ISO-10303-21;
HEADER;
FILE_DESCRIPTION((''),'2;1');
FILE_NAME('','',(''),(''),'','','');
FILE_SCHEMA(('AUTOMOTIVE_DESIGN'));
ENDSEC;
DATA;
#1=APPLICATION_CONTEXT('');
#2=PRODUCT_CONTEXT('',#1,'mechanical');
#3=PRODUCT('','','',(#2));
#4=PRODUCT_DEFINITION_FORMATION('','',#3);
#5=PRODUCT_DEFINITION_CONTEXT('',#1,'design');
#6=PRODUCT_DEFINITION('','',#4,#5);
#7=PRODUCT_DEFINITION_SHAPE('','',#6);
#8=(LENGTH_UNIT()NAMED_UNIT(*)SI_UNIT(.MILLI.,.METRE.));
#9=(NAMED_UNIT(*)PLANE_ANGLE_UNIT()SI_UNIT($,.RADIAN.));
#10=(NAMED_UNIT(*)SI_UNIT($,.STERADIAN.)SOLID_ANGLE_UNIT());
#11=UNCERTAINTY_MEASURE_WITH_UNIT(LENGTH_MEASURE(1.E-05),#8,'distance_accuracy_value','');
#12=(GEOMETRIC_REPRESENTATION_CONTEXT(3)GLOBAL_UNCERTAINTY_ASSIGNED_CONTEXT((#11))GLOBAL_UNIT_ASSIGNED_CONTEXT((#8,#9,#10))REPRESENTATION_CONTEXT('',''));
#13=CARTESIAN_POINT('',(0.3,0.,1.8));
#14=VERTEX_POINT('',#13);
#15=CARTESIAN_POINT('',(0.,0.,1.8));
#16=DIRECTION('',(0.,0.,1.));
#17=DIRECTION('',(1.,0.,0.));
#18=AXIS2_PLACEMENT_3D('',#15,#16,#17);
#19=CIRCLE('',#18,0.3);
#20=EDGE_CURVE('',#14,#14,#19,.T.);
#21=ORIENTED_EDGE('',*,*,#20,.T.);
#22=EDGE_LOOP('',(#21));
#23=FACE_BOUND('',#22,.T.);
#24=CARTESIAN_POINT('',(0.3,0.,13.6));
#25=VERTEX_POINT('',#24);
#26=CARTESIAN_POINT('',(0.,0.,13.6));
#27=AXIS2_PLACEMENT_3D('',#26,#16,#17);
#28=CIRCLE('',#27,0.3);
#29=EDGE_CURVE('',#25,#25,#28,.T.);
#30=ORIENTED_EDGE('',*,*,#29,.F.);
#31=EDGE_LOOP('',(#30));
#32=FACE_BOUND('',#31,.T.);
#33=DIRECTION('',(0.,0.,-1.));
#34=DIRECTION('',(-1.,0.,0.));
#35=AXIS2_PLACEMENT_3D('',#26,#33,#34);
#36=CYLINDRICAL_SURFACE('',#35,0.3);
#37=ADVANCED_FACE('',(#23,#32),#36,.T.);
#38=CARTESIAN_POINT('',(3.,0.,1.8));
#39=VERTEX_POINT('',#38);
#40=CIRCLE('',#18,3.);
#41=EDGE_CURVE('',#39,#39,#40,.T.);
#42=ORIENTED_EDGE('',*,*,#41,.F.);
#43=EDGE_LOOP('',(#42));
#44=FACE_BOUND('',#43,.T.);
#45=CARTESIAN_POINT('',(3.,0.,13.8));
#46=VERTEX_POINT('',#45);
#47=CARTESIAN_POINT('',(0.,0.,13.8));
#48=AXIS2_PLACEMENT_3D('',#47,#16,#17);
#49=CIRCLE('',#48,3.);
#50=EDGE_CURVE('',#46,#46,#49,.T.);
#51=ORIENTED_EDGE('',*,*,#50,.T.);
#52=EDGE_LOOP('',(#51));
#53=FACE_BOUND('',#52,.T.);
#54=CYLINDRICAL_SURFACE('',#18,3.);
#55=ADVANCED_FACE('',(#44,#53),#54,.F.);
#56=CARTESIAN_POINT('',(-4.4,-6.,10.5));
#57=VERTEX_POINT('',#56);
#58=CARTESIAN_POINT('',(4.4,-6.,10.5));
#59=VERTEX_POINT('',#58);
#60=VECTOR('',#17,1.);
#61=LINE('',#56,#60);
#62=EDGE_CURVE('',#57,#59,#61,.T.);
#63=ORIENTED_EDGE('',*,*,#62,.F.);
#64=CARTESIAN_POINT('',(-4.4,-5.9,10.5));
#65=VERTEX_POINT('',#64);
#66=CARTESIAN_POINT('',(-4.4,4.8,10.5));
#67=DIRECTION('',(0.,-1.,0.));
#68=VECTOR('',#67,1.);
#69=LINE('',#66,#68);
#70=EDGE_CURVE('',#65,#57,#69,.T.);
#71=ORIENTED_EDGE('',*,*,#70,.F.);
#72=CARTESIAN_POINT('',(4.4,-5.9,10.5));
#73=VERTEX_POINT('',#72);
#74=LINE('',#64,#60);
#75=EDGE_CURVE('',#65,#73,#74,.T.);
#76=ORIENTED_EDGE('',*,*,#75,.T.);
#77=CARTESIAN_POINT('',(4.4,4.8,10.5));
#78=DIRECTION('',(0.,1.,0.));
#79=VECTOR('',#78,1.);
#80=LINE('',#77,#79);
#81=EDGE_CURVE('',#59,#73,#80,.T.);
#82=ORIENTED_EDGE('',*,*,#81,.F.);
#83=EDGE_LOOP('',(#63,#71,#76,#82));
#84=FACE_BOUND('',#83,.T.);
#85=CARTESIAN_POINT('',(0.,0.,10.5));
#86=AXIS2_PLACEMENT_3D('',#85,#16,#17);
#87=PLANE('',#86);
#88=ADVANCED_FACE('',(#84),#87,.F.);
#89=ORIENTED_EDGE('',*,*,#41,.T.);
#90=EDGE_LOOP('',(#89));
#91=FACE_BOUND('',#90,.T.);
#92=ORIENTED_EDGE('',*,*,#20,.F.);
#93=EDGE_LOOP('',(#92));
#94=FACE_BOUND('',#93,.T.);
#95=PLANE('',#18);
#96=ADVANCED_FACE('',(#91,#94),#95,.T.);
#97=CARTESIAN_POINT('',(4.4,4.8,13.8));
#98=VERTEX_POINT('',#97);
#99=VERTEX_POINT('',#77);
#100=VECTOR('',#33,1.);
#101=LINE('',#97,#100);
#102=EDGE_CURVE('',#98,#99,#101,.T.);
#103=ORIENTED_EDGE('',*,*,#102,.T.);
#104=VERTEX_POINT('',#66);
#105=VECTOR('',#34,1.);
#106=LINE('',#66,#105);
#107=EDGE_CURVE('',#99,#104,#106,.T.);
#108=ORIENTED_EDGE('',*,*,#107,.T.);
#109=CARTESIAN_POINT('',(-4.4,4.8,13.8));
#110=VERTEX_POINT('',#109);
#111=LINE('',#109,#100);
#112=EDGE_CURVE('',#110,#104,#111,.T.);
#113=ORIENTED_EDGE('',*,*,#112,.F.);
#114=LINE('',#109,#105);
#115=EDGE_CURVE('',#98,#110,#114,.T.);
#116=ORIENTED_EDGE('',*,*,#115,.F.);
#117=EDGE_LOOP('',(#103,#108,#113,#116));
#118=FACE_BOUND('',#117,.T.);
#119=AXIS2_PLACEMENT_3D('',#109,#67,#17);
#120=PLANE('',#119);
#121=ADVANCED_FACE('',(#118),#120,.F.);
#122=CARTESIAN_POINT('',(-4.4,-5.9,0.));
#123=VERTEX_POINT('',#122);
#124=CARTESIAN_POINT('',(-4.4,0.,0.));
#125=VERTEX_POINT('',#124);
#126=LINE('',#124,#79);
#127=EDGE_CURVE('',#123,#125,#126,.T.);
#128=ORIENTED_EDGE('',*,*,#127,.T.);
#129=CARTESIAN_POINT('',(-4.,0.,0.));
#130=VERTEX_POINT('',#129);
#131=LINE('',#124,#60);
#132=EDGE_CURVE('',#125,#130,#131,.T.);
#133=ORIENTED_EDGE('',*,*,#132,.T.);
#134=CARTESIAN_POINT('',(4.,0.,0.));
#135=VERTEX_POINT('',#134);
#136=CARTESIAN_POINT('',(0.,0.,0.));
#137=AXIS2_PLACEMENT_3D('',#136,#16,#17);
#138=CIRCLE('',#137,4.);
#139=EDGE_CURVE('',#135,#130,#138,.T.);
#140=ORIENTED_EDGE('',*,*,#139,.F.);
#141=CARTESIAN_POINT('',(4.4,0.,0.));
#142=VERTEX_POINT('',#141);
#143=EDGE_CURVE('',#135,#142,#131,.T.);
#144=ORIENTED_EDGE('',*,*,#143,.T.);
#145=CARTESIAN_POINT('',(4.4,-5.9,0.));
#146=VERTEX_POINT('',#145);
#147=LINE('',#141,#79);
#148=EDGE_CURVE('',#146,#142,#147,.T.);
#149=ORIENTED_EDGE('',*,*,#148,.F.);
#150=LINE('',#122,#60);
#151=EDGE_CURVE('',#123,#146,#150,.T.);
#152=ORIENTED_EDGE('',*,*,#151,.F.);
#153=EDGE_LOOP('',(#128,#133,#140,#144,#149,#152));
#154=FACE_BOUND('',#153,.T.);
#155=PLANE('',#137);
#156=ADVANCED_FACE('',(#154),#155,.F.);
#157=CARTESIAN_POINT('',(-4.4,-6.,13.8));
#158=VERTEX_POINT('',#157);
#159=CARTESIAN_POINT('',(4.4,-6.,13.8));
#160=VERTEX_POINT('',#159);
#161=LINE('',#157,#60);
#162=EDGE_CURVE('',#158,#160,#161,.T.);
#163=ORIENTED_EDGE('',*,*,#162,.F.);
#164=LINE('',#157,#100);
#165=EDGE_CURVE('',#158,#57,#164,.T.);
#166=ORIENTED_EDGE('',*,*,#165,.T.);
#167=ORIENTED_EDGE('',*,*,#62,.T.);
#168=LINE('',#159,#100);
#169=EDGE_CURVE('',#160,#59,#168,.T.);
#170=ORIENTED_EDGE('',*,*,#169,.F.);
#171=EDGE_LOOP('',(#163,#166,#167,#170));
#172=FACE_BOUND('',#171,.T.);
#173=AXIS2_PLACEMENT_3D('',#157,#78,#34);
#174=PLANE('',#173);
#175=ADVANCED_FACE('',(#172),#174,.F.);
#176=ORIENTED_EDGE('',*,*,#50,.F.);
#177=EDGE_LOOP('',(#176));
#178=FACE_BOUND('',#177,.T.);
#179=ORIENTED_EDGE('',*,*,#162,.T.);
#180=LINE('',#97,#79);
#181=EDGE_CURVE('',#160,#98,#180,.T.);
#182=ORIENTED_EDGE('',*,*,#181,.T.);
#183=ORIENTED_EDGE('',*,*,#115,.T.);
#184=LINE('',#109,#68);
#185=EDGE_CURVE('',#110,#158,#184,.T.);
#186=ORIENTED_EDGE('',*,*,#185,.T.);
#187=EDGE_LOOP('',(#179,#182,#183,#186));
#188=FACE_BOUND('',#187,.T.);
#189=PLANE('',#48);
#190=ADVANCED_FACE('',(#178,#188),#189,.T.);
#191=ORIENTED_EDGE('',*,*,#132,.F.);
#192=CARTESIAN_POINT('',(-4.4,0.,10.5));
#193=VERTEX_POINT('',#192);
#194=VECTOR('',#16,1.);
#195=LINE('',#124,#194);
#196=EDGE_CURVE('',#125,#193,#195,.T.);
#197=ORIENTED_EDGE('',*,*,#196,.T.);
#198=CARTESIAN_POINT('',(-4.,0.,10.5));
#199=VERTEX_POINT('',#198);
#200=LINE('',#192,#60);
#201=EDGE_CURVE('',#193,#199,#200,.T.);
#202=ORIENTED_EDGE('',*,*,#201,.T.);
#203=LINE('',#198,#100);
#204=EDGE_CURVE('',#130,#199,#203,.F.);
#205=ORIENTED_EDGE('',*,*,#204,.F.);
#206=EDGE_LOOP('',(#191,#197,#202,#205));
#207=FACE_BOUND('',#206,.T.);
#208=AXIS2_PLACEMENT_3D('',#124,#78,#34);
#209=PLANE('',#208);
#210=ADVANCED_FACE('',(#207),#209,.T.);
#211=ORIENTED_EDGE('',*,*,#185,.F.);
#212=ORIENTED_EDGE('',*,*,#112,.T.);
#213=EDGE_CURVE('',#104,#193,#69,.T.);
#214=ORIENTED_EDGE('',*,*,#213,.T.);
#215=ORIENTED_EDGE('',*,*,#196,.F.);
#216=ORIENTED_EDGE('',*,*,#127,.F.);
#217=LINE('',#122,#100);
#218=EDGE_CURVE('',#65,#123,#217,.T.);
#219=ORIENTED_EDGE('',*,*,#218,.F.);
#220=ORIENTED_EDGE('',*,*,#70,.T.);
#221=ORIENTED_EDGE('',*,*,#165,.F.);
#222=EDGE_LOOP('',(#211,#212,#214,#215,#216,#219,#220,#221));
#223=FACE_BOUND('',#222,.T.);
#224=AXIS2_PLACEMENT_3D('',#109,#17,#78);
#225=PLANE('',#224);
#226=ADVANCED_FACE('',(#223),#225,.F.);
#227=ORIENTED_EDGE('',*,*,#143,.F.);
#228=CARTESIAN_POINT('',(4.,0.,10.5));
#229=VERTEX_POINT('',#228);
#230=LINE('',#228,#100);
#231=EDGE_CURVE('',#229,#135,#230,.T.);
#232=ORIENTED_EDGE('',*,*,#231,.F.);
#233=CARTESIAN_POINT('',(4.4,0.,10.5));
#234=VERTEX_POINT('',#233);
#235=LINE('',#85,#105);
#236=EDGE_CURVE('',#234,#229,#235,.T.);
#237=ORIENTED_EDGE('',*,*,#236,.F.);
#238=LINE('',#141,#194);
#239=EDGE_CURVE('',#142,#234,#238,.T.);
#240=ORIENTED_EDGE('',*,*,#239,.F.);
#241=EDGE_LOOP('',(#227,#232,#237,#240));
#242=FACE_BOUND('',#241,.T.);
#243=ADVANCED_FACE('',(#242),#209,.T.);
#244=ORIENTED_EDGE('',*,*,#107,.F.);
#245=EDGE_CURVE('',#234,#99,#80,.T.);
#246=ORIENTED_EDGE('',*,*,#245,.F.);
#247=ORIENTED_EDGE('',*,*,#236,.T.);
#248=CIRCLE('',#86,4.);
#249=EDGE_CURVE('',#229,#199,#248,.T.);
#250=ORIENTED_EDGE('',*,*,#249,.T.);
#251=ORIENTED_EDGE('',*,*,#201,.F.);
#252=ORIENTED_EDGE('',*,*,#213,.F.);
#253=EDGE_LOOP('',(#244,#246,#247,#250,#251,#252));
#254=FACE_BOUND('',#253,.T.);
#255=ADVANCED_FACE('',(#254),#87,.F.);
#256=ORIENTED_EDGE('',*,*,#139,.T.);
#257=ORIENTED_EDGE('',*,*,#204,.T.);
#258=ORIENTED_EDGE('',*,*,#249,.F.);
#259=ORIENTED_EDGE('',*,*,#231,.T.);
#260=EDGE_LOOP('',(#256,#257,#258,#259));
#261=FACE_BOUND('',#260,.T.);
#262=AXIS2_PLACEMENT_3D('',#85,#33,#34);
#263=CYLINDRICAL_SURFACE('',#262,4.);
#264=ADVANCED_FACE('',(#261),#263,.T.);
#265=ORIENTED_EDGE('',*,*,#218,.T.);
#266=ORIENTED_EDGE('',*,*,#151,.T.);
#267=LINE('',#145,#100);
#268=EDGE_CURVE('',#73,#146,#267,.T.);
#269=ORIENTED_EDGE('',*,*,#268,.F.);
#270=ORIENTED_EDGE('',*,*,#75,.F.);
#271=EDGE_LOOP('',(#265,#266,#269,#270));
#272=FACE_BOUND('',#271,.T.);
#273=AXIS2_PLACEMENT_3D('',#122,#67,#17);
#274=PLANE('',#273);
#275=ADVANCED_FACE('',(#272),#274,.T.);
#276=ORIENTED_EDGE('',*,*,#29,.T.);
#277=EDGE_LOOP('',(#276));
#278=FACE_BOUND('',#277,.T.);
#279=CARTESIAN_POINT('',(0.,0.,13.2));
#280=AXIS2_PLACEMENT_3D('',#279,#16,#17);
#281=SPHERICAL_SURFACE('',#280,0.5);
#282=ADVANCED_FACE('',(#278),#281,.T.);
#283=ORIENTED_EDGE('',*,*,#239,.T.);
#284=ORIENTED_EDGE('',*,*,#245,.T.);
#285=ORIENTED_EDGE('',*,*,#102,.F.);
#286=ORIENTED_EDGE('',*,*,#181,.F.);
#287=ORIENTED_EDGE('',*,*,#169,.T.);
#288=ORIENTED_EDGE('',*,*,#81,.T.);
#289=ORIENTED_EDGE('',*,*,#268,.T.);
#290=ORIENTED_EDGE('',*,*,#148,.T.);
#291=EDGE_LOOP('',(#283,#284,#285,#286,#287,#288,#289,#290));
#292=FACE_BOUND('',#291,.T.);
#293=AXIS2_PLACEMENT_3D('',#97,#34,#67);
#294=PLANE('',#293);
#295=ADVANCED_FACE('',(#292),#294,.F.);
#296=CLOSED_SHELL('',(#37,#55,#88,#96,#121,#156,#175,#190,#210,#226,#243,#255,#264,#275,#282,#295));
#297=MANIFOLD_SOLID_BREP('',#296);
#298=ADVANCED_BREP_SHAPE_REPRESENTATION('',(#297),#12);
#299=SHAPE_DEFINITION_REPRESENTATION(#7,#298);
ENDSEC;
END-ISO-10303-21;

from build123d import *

# Parameters (mm, degrees)
ESQUISSE1_R             = 4
BOSS_EXTRU_1_DEPTH      = 10.5
ESQUISSE2_W             = 8.8
ESQUISSE2_H             = 10.8
BOSS_EXTRU_2_DEPTH      = 3.3
ESQUISSE3_W             = 10.5
ESQUISSE3_H             = 5.9
BOSS_EXTRU_3_DEPTH      = 8.8
ESQUISSE4_R             = 3
ENL_V_MAT_EXTRU_1_DEPTH = 12
ESQUISSE5_R             = 0.3
BOSS_EXTRU_4_DEPTH      = 11.8


# Read off the part's stored shape, not the designer's step: Dôme1
with BuildPart() as part:
    # Esquisse1 → Boss.-Extru.1 (new body)
    with BuildSketch(Plane.XY):
        with Locations(Location((0, 0, 0), (0, 0, 180))):
            Circle(ESQUISSE1_R)
    extrude(amount=BOSS_EXTRU_1_DEPTH)

    # Esquisse2 → Boss.-Extru.2 (add)
    with BuildSketch(Plane.XY.offset(10.5)):
        with Locations((0, -0.6)):
            Rectangle(ESQUISSE2_W, ESQUISSE2_H)
    extrude(amount=BOSS_EXTRU_2_DEPTH)

    # Esquisse3 → Boss.-Extru.3 (add)
    with BuildSketch(Plane(origin=(4.4, 0, 0), x_dir=(0, 0, -1), z_dir=(1, 0, 0))):
        with Locations((-5.25, -2.95)):
            Rectangle(ESQUISSE3_W, ESQUISSE3_H)
    extrude(amount=-BOSS_EXTRU_3_DEPTH)

    # Esquisse4 → Enlèv. mat.-Extru.1 (cut)
    with BuildSketch(Plane.XY.offset(13.8)):
        Circle(ESQUISSE4_R)
    extrude(amount=-ENL_V_MAT_EXTRU_1_DEPTH, mode=Mode.SUBTRACT)

    # Esquisse5 → Boss.-Extru.4 (add)
    with BuildSketch(Plane.XY.offset(1.8)):
        Circle(ESQUISSE5_R)
    extrude(amount=BOSS_EXTRU_4_DEPTH)

    # Dôme1 outline → Dôme1 (revolve)
    with BuildSketch(Plane.XZ):
        with BuildLine():
            Line((0, 13.6), (0.3, 13.6))
            ThreePointArc((0.3, 13.6), (0.158113883, 13.674341649), (0, 13.7))
            Line((0, 13.7), (0, 13.6))
        make_face()
    revolve(axis=Axis((0, 0, 0), (0, 0, 1)))


solid = part.part
